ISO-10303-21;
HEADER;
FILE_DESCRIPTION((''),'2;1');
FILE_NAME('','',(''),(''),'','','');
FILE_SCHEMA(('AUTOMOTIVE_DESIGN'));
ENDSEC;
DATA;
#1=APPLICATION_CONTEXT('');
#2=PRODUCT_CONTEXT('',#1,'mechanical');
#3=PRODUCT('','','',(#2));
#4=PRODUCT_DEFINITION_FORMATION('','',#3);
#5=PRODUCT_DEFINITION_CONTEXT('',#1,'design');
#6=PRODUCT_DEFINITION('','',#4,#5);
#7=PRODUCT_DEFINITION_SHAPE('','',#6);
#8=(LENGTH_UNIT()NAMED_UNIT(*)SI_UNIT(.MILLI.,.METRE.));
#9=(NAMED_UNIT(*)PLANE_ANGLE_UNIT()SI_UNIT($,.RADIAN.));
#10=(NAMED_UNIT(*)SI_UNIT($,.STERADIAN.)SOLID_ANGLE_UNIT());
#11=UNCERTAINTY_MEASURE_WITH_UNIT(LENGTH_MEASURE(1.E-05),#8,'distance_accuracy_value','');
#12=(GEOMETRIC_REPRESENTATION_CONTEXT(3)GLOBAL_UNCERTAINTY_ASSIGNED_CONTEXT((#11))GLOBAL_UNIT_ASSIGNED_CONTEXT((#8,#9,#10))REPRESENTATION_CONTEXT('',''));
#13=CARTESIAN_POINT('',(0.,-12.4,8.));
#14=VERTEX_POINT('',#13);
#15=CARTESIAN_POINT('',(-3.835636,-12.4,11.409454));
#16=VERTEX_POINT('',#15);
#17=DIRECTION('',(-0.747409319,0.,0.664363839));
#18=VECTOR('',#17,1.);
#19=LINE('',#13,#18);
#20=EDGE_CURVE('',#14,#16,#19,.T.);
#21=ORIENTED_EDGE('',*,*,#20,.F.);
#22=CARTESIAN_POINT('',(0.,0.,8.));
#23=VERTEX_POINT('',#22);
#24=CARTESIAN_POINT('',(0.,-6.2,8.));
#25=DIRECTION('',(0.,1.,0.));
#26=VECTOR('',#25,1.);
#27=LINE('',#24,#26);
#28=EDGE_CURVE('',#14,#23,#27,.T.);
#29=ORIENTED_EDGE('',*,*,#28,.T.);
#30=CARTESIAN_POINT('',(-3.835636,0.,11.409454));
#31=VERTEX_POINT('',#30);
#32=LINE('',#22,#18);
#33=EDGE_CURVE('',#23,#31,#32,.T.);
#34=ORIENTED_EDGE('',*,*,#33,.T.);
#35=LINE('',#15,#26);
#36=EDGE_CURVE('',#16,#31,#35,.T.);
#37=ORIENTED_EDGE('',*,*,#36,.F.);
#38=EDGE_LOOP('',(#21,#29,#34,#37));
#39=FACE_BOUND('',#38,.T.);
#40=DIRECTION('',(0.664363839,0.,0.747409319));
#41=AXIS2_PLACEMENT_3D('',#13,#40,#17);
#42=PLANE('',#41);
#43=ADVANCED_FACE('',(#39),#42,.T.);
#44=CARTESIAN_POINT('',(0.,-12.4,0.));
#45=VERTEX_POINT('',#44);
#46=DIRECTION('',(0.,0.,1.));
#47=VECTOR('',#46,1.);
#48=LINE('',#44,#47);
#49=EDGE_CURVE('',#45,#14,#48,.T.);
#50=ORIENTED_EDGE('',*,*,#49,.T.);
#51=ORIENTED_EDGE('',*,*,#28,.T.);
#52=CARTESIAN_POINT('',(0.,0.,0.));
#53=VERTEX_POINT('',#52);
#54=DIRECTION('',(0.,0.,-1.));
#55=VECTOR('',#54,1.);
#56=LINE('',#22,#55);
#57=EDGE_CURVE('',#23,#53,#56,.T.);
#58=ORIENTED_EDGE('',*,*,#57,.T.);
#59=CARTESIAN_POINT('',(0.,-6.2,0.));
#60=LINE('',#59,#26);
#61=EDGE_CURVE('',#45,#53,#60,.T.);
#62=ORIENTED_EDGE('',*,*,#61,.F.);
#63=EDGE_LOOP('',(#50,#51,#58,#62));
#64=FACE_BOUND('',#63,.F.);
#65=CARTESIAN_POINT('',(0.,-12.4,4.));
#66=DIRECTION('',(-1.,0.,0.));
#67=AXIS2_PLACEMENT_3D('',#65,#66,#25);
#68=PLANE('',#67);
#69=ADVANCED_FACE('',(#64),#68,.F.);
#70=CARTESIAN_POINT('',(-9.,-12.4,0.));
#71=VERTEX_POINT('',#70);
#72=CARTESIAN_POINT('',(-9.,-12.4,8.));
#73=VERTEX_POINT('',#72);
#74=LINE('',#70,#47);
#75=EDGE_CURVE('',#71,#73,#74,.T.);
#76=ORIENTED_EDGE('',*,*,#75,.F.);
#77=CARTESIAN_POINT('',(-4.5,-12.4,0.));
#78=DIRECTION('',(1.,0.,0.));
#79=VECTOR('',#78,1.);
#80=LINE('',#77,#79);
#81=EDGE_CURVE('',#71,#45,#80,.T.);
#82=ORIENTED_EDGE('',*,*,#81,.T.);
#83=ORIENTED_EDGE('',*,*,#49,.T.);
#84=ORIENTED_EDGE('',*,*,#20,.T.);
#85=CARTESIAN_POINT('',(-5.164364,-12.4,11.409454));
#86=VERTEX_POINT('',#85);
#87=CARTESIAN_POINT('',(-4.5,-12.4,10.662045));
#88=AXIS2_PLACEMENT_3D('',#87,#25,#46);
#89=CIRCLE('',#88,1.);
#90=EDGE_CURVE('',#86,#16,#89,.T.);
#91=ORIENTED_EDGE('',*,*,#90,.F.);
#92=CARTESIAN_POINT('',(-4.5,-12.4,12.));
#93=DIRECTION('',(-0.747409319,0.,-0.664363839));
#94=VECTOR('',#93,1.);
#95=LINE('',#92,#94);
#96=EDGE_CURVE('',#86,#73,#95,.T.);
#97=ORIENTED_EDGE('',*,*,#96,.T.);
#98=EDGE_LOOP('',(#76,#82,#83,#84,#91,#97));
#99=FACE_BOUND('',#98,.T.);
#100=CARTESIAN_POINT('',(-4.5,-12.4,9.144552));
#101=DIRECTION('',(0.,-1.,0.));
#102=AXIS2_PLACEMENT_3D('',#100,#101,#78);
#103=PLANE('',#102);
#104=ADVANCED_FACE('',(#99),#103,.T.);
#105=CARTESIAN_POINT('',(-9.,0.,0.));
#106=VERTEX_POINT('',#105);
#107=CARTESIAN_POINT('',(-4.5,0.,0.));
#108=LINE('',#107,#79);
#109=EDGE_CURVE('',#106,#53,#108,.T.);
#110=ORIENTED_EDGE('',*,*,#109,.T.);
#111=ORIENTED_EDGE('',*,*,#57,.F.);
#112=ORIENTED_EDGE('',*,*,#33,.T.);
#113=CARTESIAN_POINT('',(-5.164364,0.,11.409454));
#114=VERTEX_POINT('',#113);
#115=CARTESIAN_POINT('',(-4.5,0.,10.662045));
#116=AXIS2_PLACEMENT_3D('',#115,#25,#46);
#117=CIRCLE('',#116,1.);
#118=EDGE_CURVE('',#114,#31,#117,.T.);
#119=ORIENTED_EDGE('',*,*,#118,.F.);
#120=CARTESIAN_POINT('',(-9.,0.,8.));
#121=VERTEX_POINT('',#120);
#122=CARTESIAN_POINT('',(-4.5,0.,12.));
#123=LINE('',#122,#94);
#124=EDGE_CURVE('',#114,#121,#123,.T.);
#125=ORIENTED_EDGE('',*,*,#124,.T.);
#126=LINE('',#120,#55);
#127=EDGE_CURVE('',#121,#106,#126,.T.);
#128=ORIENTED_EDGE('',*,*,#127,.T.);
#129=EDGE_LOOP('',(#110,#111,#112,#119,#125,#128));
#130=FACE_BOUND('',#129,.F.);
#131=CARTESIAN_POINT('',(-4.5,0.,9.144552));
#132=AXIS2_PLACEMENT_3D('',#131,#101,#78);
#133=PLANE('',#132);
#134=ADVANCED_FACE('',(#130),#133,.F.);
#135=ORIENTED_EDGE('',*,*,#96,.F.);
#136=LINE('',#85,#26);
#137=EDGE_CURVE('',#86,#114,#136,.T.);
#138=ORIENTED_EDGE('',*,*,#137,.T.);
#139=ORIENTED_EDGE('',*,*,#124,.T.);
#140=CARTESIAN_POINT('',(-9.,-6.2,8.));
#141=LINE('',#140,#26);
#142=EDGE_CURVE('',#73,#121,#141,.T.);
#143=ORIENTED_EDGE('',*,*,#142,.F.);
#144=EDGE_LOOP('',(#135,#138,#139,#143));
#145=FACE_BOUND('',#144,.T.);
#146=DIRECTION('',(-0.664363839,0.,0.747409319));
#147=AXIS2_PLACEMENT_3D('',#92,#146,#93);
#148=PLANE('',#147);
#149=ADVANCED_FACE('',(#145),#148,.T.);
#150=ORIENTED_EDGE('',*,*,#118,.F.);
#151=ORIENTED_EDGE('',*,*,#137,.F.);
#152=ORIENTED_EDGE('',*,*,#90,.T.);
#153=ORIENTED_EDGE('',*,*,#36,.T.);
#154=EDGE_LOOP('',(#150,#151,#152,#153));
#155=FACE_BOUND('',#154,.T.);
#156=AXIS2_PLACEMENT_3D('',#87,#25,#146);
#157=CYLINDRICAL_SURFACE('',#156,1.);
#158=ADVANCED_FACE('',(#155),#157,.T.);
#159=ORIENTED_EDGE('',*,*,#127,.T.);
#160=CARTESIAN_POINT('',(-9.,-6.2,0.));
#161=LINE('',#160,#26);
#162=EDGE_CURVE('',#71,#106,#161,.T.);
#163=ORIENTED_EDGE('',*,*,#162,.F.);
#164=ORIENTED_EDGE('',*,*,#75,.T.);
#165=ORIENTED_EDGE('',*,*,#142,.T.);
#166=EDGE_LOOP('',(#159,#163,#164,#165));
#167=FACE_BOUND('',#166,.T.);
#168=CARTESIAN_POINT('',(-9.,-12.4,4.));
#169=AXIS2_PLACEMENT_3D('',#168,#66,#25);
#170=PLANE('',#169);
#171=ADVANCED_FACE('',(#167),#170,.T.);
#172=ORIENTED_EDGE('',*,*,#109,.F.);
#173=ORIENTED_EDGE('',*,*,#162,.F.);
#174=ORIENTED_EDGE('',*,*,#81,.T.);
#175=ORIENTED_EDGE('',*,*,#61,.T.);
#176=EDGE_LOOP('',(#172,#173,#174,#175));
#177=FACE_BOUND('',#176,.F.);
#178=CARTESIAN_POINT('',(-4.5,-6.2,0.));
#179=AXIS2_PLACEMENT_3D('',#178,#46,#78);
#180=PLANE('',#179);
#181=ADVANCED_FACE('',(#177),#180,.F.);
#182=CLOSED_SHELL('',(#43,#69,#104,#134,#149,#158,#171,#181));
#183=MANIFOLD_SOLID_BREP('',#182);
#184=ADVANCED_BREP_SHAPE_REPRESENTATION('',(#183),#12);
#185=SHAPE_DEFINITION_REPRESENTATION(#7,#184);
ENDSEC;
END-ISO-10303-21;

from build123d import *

# Parameters (mm, degrees)
F0_W     = 9
F0_H     = 12.4
F1_DEPTH = 4
F2_W     = 9
F2_H     = 12.4
F3_DEPTH = 4
F5_DEPTH = 12.4
F6_R     = 1


with BuildPart() as f1:
    # F0 (on Top) → F1 (new body)
    with BuildSketch(Plane.XY):
        with Locations((-4.5, -6.2)):
            Rectangle(F0_W, F0_H)
    extrude(amount=F1_DEPTH)

    # F2 (on face) → F3 (join)
    with BuildSketch(Plane.XY.offset(4)):
        with Locations((-4.5, -6.2)):
            Rectangle(F2_W, F2_H)
    extrude(amount=F3_DEPTH)

    # F4 (on face) → F5 (join, through all)
    with BuildSketch(Plane.XZ.offset(12.4)):
        Polygon((-4.5, 12), (-9, 8), (0, 8), align=None)
    extrude(amount=-F5_DEPTH)

    # F6
    f6_edges = [f1.edges().sort_by_distance(p)[0] for p in [
        (-4.5, -6.2, 12),
    ]]
    fillet(f6_edges, radius=F6_R)


solid = f1.part
